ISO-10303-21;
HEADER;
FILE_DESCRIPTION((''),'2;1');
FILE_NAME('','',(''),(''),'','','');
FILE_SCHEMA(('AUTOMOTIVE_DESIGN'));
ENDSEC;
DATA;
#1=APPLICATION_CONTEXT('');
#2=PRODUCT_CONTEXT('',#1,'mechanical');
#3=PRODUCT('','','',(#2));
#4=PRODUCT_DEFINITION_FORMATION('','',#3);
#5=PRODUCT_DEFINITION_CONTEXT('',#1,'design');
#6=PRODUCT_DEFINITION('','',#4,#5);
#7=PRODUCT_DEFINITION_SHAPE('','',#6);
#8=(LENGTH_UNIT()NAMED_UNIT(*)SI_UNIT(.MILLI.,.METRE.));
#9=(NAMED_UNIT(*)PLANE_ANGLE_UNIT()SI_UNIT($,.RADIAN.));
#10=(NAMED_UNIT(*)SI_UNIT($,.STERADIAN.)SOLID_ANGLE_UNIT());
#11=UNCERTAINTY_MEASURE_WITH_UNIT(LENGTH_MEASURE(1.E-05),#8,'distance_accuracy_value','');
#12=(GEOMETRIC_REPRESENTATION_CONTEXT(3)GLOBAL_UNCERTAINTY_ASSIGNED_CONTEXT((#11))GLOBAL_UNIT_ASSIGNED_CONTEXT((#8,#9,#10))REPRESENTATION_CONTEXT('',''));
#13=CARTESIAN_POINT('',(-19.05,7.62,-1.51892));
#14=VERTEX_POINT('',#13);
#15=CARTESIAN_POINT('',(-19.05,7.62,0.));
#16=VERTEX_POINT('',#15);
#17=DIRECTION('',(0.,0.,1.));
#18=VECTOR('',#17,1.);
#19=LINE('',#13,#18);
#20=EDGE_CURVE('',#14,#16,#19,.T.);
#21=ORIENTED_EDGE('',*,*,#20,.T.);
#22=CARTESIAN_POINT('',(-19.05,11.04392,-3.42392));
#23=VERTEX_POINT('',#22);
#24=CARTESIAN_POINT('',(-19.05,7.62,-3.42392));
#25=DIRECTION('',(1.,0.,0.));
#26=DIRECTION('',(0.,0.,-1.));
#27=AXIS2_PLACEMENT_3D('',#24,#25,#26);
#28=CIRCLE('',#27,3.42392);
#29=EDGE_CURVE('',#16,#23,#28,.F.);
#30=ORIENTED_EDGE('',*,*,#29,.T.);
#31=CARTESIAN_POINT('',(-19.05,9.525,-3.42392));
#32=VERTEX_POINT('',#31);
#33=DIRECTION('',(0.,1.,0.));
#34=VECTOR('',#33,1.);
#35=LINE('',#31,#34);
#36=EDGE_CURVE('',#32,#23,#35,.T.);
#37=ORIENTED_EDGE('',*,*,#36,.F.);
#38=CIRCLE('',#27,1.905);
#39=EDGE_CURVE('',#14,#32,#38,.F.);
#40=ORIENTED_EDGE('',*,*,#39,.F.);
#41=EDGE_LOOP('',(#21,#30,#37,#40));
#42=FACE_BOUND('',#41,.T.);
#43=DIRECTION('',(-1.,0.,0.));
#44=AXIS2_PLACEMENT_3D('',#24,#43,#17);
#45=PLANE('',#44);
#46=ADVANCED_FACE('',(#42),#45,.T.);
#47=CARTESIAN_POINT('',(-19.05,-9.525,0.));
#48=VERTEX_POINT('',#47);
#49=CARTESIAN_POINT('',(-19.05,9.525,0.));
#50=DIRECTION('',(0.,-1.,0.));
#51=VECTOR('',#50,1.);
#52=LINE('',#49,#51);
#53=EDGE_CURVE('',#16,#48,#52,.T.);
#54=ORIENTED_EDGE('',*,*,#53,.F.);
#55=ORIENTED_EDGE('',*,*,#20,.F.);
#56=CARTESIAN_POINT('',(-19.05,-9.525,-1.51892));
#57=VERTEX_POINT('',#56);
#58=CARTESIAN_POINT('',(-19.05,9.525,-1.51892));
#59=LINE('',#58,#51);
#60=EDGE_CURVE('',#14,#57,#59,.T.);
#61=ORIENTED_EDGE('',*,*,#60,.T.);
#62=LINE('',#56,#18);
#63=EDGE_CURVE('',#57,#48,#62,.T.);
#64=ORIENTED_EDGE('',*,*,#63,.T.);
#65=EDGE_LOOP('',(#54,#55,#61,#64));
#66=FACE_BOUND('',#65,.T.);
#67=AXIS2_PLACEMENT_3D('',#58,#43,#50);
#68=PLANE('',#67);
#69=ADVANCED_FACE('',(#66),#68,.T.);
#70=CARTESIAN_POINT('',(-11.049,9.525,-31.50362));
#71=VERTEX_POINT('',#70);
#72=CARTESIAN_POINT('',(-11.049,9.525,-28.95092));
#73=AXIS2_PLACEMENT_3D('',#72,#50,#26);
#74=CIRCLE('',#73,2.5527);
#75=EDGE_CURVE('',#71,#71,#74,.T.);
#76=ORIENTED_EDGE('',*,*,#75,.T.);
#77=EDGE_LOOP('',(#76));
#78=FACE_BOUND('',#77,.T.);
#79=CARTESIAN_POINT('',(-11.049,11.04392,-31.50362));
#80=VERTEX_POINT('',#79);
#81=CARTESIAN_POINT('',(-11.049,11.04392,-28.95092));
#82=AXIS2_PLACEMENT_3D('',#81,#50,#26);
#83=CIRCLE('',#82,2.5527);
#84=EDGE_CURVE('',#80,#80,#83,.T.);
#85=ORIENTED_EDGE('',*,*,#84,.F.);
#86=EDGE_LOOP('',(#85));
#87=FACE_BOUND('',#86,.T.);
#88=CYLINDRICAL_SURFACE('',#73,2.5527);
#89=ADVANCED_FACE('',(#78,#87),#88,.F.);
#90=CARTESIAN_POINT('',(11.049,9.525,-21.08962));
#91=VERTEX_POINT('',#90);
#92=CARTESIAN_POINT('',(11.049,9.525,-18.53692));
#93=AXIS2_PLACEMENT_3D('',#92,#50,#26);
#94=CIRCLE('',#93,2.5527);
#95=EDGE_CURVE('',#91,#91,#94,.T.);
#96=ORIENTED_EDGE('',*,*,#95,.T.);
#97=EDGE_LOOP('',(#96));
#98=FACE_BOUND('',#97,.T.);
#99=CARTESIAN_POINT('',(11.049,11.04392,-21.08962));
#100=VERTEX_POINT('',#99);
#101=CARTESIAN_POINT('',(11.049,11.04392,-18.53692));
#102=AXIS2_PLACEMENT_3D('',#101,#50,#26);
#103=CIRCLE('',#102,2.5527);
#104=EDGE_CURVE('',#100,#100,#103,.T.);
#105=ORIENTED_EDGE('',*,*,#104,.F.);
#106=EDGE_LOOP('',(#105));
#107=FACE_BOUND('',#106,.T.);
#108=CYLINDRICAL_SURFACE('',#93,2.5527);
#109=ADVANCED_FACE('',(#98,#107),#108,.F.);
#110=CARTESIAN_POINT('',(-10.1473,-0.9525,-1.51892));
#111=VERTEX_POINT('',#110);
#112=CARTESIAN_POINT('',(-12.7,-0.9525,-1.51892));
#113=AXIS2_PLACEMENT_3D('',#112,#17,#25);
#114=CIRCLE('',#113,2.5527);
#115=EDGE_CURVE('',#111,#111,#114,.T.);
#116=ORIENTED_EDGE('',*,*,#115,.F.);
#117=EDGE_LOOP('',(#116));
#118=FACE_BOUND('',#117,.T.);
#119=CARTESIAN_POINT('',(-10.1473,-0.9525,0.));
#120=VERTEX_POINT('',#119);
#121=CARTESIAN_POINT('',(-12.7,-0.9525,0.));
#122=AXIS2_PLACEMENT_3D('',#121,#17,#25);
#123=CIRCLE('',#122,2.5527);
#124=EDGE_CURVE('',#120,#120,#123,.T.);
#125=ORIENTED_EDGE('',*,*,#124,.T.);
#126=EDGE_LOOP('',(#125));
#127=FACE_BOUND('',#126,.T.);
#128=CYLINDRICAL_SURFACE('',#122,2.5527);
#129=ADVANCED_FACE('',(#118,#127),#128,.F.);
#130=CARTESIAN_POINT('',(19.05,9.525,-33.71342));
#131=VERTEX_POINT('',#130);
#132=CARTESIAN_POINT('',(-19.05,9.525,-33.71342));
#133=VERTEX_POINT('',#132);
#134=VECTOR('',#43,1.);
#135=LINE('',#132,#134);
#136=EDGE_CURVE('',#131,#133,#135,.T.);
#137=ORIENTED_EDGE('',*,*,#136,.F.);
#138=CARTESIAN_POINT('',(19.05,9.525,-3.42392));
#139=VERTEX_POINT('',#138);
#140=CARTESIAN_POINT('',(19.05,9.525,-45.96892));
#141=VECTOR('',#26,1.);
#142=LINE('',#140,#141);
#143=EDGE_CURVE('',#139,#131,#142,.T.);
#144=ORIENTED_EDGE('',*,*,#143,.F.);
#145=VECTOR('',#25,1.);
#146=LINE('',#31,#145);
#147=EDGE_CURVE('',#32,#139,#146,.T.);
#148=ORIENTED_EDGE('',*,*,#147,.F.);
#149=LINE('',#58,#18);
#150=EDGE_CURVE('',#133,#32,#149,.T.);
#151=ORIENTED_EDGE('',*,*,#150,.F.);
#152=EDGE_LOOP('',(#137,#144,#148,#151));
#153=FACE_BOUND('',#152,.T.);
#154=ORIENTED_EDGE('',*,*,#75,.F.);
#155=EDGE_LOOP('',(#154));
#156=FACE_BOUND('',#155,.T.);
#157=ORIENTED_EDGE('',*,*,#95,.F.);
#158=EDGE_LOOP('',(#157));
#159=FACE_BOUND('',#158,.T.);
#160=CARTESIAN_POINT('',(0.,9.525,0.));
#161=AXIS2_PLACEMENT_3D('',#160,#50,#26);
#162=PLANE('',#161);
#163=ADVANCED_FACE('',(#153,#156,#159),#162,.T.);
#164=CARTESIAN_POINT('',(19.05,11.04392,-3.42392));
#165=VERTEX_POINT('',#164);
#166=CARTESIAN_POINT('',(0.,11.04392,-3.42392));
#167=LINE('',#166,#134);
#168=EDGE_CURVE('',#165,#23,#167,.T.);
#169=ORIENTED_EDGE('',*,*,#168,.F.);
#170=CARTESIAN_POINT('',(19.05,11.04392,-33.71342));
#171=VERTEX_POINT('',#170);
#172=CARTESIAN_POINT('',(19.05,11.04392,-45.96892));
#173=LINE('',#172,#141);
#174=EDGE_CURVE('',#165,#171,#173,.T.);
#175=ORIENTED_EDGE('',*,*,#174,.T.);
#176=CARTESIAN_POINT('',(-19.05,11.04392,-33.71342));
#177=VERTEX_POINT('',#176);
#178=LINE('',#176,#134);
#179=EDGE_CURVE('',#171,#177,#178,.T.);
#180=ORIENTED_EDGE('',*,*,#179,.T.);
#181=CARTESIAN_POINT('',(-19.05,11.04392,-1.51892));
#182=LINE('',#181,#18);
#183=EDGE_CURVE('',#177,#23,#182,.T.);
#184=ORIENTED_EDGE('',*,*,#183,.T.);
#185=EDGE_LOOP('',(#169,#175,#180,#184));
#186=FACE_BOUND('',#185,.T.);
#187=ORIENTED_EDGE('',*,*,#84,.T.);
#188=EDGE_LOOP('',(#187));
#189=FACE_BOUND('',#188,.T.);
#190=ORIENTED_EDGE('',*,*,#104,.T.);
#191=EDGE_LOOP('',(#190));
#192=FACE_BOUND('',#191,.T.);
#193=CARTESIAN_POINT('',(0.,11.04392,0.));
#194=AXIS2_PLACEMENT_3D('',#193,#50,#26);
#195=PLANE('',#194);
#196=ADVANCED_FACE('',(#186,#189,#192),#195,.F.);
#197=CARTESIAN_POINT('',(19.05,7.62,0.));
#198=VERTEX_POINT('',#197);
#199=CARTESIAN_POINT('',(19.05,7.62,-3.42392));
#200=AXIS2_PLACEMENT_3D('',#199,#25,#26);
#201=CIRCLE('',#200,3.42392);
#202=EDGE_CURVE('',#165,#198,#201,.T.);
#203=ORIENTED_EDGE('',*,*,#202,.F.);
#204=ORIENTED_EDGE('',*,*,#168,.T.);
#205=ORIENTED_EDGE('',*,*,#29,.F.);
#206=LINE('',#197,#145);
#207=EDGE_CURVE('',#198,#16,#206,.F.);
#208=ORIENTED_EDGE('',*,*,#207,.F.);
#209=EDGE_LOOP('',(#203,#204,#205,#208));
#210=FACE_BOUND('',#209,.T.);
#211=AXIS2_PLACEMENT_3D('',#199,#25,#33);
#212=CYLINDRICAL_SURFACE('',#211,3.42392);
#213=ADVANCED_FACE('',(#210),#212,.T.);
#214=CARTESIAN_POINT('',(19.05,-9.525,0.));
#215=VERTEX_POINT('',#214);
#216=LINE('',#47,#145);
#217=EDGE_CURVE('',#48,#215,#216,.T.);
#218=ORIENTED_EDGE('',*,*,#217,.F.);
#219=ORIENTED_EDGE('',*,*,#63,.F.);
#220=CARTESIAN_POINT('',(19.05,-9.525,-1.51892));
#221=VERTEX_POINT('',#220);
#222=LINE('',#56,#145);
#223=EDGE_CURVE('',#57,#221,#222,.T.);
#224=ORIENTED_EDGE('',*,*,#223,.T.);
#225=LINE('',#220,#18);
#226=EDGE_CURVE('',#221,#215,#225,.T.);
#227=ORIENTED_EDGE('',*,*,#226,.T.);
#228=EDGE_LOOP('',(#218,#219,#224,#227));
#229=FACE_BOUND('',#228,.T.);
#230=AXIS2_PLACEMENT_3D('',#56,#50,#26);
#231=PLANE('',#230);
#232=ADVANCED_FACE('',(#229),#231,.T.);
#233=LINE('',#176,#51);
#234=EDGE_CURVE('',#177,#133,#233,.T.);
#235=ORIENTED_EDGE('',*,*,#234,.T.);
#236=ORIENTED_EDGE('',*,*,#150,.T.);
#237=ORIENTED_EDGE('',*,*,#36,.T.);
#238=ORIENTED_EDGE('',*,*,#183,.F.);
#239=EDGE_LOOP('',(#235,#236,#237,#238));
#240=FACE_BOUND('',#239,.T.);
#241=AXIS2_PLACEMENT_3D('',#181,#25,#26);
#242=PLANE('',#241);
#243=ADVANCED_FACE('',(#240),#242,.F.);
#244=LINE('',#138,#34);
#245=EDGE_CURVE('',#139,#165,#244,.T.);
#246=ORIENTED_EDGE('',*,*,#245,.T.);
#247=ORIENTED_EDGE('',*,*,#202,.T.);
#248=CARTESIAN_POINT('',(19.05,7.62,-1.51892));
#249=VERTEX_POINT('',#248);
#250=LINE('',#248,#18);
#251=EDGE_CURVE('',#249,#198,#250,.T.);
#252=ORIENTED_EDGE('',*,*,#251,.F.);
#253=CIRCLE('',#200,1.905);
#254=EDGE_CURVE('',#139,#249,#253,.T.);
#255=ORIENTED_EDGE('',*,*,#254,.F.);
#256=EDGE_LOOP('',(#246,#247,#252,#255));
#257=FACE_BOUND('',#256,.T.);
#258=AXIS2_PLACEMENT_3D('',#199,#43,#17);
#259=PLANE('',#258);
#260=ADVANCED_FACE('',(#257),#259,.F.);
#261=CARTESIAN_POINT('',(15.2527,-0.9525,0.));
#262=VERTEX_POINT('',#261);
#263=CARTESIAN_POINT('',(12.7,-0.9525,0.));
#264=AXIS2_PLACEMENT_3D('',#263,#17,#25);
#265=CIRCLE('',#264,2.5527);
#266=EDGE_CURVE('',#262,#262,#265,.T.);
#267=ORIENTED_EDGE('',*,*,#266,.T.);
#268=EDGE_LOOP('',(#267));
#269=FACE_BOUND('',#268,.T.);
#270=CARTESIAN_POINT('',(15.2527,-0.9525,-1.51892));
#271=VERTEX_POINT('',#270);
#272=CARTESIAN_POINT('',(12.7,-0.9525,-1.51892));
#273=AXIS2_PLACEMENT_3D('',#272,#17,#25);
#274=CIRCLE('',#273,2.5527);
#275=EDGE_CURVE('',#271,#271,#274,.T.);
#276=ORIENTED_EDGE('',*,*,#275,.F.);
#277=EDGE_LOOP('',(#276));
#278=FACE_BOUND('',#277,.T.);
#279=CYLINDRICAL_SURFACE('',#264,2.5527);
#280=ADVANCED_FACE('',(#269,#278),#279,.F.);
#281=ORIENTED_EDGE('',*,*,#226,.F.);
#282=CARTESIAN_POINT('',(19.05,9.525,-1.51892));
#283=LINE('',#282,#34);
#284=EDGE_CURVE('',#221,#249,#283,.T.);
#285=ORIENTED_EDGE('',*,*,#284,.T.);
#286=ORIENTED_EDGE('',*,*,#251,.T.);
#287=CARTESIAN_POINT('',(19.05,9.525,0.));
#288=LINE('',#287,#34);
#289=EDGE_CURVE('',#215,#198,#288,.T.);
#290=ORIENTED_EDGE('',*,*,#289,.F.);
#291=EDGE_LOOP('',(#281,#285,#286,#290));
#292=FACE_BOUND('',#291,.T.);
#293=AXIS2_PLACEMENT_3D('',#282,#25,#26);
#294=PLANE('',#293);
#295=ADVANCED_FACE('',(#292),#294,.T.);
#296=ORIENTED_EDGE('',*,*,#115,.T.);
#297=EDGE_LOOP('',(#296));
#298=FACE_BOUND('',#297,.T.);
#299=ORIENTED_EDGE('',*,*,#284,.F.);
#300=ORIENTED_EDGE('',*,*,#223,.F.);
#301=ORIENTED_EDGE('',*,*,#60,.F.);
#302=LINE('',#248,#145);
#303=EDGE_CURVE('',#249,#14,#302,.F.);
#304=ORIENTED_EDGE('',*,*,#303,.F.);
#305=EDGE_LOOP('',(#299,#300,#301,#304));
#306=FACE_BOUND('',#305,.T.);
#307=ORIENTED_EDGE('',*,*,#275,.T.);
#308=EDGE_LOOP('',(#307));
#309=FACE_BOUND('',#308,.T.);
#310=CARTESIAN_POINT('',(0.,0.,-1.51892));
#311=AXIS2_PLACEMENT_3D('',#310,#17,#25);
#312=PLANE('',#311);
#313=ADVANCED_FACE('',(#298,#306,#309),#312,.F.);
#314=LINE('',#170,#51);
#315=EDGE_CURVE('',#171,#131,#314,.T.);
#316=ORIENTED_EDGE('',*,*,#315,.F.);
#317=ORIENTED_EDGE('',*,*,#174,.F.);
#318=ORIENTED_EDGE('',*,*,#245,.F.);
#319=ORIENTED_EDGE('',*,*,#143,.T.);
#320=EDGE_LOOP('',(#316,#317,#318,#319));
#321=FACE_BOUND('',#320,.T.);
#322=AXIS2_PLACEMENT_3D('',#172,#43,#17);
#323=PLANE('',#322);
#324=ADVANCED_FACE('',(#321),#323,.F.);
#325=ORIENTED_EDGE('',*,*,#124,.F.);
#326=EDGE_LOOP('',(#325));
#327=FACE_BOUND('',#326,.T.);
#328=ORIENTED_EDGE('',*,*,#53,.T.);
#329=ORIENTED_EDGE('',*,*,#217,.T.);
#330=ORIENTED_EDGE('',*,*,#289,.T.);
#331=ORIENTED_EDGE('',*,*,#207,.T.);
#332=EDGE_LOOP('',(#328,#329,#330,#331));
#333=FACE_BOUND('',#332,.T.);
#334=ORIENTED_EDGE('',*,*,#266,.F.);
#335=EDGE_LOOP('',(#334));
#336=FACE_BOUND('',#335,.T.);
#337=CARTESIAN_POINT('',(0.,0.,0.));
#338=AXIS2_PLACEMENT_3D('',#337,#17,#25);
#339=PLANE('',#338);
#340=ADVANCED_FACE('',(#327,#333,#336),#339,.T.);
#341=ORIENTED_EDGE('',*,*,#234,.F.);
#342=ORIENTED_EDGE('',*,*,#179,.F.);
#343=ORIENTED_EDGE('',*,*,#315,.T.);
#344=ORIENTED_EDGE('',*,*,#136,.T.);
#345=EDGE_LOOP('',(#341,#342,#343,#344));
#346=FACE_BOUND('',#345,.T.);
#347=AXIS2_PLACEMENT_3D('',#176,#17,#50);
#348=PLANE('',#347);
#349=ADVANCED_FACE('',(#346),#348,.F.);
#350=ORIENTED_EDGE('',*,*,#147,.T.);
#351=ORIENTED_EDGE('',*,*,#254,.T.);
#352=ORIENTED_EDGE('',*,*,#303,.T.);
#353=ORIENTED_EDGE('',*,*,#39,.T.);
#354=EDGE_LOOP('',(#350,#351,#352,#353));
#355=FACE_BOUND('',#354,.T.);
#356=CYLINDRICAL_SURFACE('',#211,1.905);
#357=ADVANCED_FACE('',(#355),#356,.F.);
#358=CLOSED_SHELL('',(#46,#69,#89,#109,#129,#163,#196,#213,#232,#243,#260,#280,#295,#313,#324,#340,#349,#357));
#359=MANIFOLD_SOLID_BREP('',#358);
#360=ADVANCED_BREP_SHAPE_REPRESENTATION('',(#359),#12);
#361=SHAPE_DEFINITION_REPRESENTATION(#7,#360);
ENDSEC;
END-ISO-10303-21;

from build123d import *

# Parameters (mm, degrees)
SKETCH7_W                    = 38.1
SKETCH7_H                    = 19.05
BASE_FLANGE1_DEPTH           = 1.51892
EDGE_FLANGE1_STRIP_W         = 9.88568
EDGE_FLANGE1_STRIP_H         = 1.51892
EDGE_FLANGE1_STRIP_CUT_DEPTH = 38.1
EDGE_FLANGE1_DEPTH           = 38.1
F_10_CLEARANCE_HOLE1_D       = 5.1054
F_10_CLEARANCE_HOLE2_D       = 5.1054
SKETCH24_W                   = 38.1
SKETCH24_H                   = 12.2555
CUT_EXTRUDE1_DEPTH           = 54.281766168


# Sheet-metal steps are written as plain solids
with BuildPart() as part:
    # Sketch7 → Base-Flange1 (new body)
    with BuildSketch(Plane.XY):
        Rectangle(SKETCH7_W, SKETCH7_H)
    extrude(amount=-BASE_FLANGE1_DEPTH)

    # Edge-Flange1 strip (across the edge) → Edge-Flange1 strip cut (cut)
    with BuildSketch(Plane(origin=(-19.05, 9.525, -1.51892), x_dir=(0, -1, 0), z_dir=(1, 0, 0))):
        with Locations((-3.03784, -0.75946)):
            Rectangle(EDGE_FLANGE1_STRIP_W, EDGE_FLANGE1_STRIP_H)
    extrude(amount=EDGE_FLANGE1_STRIP_CUT_DEPTH, mode=Mode.SUBTRACT)

    # Edge-Flange1 section (across the edge) → Edge-Flange1 (add)
    with BuildSketch(Plane(origin=(-19.05, 9.525, -1.51892), x_dir=(0, -1, 0), z_dir=(1, 0, 0))):
        with BuildLine():
            Line((-1.51892, 1.905), (-1.51892, 44.45))
            Line((-1.51892, 44.45), (0, 44.45))
            Line((0, 44.45), (0, 1.905))
            ThreePointArc((0, 1.905), (0.557961582, 0.557961582), (1.905, 0))
            Line((1.905, 0), (1.905, -1.51892))
            ThreePointArc((1.905, -1.51892), (-0.51607705, -0.51607705), (-1.51892, 1.905))
        make_face()
    extrude(amount=EDGE_FLANGE1_DEPTH)

    # #10 Clearance Hole1 (through all)
    with Locations(Plane.XY):
        with Locations((-12.7, -0.9525), (12.7, -0.9525)):
            Hole(F_10_CLEARANCE_HOLE1_D / 2)

    # #10 Clearance Hole2 (through all)
    with Locations(Plane(origin=(0, 9.525, 0), x_dir=(-1, 0, 0), z_dir=(0, -1, 0))):
        with Locations((-11.049, 18.53692), (11.049, 28.95092)):
            Hole(F_10_CLEARANCE_HOLE2_D / 2)

    # Sketch24 → Cut-Extrude1 (cut, through all)
    with BuildSketch(Plane.XZ.offset(-9.525)):
        with Locations((0, -39.84117)):
            Rectangle(SKETCH24_W, SKETCH24_H)
    extrude(amount=-CUT_EXTRUDE1_DEPTH, mode=Mode.SUBTRACT)


solid = part.part
